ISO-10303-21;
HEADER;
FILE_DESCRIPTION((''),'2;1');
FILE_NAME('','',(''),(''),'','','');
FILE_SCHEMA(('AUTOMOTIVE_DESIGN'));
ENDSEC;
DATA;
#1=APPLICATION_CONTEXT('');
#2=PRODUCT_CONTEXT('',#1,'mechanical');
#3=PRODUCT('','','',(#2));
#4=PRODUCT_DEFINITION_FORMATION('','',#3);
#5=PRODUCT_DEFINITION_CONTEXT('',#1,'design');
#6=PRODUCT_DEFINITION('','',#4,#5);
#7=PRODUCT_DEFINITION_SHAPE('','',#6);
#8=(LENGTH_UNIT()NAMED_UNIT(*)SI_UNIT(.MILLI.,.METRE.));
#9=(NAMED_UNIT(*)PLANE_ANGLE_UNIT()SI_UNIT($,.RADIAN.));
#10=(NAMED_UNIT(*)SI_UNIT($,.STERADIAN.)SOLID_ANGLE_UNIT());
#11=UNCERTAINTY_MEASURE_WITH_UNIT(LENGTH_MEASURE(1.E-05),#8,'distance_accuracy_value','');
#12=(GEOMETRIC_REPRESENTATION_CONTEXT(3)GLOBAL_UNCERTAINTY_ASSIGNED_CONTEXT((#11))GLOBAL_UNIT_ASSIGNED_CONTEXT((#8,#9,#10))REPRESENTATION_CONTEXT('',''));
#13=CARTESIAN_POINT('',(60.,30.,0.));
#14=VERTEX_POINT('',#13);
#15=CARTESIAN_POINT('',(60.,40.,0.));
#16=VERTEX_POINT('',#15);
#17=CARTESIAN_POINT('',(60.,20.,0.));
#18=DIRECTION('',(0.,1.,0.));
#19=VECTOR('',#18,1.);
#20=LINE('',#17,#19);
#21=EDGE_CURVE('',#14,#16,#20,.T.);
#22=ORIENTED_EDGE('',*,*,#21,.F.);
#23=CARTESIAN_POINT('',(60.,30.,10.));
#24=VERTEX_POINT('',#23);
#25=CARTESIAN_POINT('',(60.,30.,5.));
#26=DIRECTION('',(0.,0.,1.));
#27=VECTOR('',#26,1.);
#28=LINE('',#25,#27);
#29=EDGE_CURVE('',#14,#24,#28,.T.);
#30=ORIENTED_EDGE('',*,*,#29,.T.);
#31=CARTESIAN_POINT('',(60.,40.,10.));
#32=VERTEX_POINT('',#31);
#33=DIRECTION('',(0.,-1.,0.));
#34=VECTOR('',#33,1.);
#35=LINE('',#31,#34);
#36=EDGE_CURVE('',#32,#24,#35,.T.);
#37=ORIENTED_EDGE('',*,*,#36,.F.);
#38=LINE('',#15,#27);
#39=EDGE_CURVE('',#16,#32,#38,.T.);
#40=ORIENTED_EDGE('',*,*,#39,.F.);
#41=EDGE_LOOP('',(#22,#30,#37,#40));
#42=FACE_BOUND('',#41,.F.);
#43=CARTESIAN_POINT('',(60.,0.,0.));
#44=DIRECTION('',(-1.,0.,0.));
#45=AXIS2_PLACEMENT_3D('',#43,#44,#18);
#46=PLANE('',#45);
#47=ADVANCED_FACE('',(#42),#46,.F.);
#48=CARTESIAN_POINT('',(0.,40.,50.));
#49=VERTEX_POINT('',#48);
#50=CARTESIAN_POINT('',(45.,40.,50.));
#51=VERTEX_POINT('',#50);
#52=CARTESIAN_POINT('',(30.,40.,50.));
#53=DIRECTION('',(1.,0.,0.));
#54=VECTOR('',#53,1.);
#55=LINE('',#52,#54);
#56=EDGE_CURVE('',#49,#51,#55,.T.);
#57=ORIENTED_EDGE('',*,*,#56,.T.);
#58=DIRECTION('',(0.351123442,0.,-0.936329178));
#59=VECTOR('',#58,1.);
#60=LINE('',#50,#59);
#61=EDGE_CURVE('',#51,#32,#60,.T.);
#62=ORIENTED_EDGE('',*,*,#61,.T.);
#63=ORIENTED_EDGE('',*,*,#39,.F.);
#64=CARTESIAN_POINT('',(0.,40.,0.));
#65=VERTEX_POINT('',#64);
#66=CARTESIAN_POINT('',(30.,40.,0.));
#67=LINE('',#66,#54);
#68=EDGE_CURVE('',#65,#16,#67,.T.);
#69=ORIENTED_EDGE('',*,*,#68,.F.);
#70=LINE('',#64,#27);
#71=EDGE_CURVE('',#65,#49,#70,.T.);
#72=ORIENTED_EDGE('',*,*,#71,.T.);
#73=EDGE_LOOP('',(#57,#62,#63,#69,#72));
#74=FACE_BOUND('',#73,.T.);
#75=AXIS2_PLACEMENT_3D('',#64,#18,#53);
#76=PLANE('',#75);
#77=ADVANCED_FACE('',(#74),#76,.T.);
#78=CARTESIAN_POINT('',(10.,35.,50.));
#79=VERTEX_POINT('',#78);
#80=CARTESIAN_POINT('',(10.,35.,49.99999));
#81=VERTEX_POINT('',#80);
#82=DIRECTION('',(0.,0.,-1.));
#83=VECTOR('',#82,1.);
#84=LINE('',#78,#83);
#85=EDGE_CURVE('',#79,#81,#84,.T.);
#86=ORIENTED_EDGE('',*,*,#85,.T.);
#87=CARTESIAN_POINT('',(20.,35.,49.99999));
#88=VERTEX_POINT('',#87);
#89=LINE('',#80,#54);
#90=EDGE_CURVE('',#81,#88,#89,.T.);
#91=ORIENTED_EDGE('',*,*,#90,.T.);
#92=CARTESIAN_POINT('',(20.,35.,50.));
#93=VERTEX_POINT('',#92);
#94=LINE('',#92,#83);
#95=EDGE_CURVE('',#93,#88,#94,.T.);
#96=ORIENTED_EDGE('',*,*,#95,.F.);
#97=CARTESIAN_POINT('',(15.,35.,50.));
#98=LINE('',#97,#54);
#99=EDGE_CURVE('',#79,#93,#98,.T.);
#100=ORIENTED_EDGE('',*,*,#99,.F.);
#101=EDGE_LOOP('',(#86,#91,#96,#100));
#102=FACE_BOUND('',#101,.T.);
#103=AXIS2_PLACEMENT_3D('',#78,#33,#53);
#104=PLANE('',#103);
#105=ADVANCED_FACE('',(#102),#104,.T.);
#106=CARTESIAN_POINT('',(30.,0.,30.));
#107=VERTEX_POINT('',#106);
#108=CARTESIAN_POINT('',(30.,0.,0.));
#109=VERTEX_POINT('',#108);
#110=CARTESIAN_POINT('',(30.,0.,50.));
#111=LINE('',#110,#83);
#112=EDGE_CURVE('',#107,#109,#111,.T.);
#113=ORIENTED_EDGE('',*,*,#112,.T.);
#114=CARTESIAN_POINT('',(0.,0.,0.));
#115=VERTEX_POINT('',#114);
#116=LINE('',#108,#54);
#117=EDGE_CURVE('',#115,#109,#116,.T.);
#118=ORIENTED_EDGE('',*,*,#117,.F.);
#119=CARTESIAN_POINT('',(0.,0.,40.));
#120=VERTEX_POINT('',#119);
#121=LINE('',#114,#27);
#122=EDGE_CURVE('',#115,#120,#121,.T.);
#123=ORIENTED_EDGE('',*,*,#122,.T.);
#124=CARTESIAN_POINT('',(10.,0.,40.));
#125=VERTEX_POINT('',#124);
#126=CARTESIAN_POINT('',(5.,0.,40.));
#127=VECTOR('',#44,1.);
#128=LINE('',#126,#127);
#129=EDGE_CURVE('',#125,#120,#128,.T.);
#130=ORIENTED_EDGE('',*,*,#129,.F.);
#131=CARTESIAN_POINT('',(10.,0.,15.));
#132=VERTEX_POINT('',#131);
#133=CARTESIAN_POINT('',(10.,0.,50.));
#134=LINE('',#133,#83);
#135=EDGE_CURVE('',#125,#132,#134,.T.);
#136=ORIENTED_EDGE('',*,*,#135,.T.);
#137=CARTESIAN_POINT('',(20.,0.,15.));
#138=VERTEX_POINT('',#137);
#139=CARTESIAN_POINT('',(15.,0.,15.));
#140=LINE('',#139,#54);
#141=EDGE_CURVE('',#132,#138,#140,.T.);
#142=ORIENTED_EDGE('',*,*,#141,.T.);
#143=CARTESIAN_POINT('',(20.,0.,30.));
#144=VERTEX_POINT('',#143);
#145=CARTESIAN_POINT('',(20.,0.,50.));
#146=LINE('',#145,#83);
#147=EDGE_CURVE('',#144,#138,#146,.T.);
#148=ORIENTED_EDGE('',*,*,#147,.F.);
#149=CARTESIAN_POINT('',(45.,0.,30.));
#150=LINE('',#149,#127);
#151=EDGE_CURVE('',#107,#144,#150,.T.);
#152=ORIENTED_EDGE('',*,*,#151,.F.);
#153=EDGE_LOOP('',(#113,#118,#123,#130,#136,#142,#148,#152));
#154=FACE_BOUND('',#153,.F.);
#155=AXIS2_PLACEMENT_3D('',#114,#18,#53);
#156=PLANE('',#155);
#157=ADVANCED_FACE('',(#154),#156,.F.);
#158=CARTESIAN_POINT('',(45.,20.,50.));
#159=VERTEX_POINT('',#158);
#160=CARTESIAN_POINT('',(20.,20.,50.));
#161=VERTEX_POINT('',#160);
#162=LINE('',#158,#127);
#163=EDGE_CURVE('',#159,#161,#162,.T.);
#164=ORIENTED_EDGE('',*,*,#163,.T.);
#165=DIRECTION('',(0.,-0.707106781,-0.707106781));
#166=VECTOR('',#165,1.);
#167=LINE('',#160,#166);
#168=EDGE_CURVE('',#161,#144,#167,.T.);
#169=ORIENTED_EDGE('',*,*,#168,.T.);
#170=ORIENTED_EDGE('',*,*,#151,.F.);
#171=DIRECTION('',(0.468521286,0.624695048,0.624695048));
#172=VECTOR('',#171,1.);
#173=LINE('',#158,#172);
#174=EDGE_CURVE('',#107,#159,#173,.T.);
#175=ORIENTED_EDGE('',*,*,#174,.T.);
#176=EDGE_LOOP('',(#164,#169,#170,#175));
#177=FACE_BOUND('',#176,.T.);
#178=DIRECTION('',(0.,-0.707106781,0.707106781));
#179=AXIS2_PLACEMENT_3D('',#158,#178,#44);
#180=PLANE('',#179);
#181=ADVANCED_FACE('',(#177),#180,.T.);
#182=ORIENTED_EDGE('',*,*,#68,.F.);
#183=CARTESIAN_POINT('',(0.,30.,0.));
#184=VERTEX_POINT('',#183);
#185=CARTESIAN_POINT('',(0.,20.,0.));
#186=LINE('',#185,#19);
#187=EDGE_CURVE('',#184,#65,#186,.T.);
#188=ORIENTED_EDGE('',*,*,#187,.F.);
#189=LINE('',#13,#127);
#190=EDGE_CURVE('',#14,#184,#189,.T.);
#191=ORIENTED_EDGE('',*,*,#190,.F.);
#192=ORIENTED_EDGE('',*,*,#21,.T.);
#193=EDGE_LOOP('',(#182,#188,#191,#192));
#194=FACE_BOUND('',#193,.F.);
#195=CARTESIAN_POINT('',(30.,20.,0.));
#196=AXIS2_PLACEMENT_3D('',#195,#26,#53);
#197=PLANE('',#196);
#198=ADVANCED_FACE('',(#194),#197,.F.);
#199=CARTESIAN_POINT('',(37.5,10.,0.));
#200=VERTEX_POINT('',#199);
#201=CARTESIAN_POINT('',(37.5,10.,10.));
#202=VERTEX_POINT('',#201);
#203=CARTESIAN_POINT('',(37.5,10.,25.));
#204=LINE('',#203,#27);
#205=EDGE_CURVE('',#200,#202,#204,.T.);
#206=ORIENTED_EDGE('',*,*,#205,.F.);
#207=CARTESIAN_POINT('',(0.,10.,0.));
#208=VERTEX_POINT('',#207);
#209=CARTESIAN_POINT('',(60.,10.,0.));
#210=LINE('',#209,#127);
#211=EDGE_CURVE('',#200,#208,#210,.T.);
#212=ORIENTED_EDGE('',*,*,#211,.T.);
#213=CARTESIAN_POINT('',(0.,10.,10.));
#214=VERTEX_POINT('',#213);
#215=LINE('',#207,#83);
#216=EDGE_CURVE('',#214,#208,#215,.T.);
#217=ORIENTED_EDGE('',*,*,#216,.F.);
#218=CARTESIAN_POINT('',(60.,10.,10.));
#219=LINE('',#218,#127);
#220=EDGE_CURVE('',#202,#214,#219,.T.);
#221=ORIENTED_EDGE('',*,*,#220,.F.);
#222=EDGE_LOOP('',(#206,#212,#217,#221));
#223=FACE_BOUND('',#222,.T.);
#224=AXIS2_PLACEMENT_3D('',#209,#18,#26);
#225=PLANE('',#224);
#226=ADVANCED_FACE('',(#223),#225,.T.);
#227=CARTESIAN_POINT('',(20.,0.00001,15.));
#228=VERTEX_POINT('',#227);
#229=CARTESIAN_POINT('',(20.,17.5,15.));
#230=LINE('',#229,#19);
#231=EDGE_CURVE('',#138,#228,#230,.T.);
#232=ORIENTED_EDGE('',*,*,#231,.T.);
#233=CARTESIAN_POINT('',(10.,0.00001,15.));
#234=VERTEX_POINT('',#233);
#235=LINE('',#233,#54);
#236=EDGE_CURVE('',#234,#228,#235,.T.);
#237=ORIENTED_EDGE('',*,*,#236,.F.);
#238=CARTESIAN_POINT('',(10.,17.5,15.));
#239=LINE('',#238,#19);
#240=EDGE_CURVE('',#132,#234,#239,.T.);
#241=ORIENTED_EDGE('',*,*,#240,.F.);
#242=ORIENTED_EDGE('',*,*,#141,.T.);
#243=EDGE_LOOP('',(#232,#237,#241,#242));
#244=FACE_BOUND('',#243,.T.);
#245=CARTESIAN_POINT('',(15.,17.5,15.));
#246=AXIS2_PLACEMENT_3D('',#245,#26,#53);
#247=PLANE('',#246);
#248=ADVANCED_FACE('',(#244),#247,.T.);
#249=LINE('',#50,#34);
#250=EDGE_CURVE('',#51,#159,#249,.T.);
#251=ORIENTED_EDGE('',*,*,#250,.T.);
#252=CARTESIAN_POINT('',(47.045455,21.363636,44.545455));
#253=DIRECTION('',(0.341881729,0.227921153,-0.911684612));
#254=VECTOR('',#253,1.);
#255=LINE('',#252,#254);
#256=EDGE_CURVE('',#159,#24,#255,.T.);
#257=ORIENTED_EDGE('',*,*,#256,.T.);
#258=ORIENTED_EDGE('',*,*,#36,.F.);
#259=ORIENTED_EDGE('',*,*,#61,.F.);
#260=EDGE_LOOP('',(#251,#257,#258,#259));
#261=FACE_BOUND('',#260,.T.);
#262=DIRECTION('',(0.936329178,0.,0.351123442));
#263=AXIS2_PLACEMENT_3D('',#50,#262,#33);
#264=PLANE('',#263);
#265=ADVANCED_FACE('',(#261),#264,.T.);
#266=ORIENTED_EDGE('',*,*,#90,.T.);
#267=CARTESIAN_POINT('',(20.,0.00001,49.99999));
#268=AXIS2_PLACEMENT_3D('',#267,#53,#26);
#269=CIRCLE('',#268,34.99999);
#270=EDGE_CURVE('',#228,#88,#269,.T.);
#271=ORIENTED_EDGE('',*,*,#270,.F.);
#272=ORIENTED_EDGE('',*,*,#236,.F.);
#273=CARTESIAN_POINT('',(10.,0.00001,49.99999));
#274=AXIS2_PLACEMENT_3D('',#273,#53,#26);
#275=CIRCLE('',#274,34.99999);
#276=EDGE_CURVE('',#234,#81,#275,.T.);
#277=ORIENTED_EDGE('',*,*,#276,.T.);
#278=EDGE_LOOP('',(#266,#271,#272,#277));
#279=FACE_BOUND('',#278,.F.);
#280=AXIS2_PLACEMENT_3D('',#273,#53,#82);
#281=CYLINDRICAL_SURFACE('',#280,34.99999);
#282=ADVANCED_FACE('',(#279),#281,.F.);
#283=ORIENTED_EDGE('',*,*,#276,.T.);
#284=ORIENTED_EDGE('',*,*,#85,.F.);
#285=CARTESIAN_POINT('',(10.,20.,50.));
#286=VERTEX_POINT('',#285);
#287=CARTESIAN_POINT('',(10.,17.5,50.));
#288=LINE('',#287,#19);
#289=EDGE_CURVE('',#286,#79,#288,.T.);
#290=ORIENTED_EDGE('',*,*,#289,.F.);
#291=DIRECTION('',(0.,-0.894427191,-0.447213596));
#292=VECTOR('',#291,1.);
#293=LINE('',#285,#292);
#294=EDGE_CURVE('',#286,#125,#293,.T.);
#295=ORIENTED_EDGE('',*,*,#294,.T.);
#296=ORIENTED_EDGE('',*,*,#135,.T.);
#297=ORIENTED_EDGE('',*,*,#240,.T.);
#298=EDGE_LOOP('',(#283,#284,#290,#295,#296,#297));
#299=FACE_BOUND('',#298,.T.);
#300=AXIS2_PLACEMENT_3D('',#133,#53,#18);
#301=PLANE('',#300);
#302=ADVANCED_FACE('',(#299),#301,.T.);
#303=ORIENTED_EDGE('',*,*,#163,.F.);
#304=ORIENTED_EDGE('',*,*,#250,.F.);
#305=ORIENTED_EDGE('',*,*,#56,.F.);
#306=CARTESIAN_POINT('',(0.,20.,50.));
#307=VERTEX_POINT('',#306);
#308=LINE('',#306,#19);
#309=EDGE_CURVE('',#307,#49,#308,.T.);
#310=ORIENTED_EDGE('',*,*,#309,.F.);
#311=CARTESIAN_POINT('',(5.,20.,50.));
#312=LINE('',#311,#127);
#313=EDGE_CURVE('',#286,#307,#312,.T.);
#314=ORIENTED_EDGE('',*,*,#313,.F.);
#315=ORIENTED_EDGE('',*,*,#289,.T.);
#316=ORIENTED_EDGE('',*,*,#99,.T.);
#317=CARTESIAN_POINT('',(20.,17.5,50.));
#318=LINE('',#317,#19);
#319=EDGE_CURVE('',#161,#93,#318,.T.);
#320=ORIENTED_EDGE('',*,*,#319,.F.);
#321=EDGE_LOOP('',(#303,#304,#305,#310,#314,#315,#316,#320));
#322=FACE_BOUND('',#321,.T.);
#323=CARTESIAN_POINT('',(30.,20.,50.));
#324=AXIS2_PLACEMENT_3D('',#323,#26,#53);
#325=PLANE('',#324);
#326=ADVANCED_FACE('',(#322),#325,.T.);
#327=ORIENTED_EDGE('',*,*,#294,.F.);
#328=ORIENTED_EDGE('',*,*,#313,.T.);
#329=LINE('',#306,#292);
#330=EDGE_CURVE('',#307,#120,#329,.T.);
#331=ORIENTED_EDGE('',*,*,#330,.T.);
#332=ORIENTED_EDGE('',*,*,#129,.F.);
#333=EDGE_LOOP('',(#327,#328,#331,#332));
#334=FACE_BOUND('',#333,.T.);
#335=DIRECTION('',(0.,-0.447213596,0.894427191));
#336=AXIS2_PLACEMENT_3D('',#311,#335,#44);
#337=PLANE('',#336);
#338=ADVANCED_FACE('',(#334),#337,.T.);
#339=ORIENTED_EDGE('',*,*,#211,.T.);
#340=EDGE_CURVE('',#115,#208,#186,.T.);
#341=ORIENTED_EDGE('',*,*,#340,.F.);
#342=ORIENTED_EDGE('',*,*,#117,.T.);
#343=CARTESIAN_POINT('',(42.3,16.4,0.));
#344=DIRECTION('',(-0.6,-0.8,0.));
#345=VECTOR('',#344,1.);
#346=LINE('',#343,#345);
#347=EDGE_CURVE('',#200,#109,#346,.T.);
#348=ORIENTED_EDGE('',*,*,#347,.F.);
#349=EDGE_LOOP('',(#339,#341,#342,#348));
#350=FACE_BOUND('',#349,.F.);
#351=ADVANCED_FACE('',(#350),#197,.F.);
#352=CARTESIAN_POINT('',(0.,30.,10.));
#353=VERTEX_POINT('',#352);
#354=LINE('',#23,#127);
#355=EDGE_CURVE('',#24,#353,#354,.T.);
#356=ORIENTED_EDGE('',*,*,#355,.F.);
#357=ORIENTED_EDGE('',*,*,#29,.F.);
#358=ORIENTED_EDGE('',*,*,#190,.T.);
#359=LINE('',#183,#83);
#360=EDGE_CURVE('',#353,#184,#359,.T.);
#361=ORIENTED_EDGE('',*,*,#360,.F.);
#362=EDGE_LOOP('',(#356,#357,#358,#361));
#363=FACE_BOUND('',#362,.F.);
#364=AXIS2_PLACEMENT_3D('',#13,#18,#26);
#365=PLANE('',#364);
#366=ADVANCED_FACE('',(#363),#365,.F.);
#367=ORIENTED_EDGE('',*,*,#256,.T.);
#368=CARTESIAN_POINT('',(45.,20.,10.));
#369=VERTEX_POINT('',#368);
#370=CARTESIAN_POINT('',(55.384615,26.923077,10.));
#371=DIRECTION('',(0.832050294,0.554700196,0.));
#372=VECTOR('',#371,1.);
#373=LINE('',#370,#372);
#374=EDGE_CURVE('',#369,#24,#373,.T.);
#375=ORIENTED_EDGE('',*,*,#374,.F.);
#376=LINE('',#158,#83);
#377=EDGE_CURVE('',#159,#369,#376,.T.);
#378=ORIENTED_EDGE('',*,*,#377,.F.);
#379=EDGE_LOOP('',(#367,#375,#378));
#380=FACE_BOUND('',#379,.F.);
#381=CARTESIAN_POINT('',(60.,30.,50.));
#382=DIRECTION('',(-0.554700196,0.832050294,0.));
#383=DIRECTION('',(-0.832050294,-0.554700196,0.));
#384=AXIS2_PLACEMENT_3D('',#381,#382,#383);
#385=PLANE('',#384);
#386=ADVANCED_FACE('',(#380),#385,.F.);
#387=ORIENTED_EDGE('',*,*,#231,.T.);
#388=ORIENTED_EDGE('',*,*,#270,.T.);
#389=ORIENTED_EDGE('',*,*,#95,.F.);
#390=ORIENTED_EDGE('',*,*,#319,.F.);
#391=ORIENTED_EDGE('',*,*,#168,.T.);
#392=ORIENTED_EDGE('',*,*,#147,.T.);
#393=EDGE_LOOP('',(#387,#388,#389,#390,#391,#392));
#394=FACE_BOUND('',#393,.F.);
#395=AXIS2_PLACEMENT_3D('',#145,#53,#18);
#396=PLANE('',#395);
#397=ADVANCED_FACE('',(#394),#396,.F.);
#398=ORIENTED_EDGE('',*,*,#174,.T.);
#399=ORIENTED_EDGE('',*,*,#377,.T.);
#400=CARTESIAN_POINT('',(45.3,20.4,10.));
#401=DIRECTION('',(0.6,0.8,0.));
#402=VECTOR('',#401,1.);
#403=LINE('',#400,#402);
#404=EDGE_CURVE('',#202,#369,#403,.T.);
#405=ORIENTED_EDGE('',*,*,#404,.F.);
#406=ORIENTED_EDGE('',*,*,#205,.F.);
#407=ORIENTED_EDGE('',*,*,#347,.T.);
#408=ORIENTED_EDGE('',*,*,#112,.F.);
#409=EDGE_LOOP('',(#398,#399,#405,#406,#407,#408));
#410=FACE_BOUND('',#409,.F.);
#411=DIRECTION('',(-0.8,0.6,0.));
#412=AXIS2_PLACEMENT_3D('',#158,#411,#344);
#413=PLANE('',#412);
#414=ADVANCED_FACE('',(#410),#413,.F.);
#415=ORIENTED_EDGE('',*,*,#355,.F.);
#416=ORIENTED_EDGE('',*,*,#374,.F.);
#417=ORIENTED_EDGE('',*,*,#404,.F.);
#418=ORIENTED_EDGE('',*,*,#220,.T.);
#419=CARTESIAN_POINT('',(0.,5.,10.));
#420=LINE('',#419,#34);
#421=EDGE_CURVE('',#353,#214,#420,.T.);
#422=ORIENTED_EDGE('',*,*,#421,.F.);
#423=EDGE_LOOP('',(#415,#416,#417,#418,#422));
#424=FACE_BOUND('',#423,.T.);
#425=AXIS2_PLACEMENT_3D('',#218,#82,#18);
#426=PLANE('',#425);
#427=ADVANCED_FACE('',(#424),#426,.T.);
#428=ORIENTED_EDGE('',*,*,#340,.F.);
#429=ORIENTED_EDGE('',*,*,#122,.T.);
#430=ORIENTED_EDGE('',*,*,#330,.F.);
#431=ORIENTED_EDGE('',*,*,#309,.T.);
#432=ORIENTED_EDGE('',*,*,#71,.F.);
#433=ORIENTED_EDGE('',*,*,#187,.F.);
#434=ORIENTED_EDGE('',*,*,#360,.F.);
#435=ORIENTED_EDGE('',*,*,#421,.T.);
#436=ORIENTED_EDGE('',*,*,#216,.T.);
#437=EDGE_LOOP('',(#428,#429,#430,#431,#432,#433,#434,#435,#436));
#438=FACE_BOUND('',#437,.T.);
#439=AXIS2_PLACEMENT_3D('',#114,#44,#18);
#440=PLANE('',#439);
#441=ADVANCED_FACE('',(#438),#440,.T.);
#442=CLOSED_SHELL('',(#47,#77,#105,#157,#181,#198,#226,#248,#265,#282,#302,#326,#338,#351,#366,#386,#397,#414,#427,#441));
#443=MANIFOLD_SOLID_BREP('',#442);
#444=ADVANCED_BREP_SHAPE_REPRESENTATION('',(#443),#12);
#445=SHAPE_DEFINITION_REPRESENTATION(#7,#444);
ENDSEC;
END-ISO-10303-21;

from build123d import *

# Parameters (mm, degrees)
F0_W      = 60
F0_H      = 40
F1_DEPTH  = 50
F2_W      = 10
F2_H      = 35
F3_DEPTH  = 35
F4_R      = 34.99999
F5_W      = 20
F5_H      = 10
F6_DEPTH  = 60.001
F8_DEPTH  = 50.001
F10_DEPTH = 50.001
F17_W     = 10
F17_H     = 20


# Not quite as in the source:
# - a fillet or chamfer is up to 0.001 mm smaller than in the source, because OpenCascade refuses the exact size


with BuildPart() as f1:
    # F0 (on Top) → F1 (new body)
    with BuildSketch(Plane.XY):
        with Locations((30, 20)):
            Rectangle(F0_W, F0_H)
    extrude(amount=F1_DEPTH)

    # F2 (on face) → F3 (cut)
    with BuildSketch(Plane.XY.offset(50)):
        with Locations((15, 17.5)):
            Rectangle(F2_W, F2_H)
    extrude(amount=-F3_DEPTH, mode=Mode.SUBTRACT)

    # F4 (radius 35 in the source; OpenCascade refuses exactly that, so slightly less here)
    f4_edges = [f1.edges().sort_by_distance(p)[0] for p in [
        (15, 35, 15),
    ]]
    fillet(f4_edges, radius=F4_R)

    # F5 (on face) → F6 (cut, through all)
    with BuildSketch(Plane.YZ.offset(60)):
        with Locations((20, 5)):
            Rectangle(F5_W, F5_H)
    extrude(amount=-F6_DEPTH, mode=Mode.SUBTRACT)

    # F7 (on face) → F8 (cut, through all)
    with BuildSketch(Plane.XY.offset(50)):
        Polygon((45, 20), (60, 20), (60, 30), align=None)
    extrude(amount=-F8_DEPTH, mode=Mode.SUBTRACT)

    # F9 (on face) → F10 (cut, through all)
    with BuildSketch(Plane.XY.offset(50)):
        Polygon((60, 20), (45, 20), (30, 0), (60, 0), align=None)
    extrude(amount=-F10_DEPTH, mode=Mode.SUBTRACT)

    # F13: sweep along a path in F12
    with BuildLine(Plane(origin=(0, 40, 0), x_dir=(-1, 0, 0), z_dir=(0, 1, 0))) as f13_path:
        Line((-45, 50), (-60, 10))
    # F11 (on face) → F13 (sweep, cut)
    with BuildSketch(Plane.XY.offset(50)):
        Polygon((45, 40), (45, 20), (60, 30), (60, 40), align=None)
    sweep(path=f13_path.line, mode=Mode.SUBTRACT)

    # F16: sweep along a path in F15
    with BuildLine(Plane(origin=(20, 0, 0), x_dir=(0, -1, 0), z_dir=(-1, 0, 0))) as f16_path:
        Line((-20, 50), (0, 30))
    # F14 (on face) → F16 (sweep, cut)
    with BuildSketch(Plane.XY.offset(50)):
        Polygon((30, 0), (45, 20), (20, 20), (20, 0), align=None)
    sweep(path=f16_path.line, mode=Mode.SUBTRACT)

    # F19: sweep along a path in F18
    with BuildLine(Plane(origin=(0, 0, 0), x_dir=(0, -1, 0), z_dir=(-1, 0, 0))) as f19_path:
        Line((-20, 50), (0, 40))
    # F17 (on face) → F19 (sweep, cut)
    with BuildSketch(Plane.XY.offset(50)):
        with Locations((5, 10)):
            Rectangle(F17_W, F17_H)
    sweep(path=f19_path.line, mode=Mode.SUBTRACT)


solid = f1.part
